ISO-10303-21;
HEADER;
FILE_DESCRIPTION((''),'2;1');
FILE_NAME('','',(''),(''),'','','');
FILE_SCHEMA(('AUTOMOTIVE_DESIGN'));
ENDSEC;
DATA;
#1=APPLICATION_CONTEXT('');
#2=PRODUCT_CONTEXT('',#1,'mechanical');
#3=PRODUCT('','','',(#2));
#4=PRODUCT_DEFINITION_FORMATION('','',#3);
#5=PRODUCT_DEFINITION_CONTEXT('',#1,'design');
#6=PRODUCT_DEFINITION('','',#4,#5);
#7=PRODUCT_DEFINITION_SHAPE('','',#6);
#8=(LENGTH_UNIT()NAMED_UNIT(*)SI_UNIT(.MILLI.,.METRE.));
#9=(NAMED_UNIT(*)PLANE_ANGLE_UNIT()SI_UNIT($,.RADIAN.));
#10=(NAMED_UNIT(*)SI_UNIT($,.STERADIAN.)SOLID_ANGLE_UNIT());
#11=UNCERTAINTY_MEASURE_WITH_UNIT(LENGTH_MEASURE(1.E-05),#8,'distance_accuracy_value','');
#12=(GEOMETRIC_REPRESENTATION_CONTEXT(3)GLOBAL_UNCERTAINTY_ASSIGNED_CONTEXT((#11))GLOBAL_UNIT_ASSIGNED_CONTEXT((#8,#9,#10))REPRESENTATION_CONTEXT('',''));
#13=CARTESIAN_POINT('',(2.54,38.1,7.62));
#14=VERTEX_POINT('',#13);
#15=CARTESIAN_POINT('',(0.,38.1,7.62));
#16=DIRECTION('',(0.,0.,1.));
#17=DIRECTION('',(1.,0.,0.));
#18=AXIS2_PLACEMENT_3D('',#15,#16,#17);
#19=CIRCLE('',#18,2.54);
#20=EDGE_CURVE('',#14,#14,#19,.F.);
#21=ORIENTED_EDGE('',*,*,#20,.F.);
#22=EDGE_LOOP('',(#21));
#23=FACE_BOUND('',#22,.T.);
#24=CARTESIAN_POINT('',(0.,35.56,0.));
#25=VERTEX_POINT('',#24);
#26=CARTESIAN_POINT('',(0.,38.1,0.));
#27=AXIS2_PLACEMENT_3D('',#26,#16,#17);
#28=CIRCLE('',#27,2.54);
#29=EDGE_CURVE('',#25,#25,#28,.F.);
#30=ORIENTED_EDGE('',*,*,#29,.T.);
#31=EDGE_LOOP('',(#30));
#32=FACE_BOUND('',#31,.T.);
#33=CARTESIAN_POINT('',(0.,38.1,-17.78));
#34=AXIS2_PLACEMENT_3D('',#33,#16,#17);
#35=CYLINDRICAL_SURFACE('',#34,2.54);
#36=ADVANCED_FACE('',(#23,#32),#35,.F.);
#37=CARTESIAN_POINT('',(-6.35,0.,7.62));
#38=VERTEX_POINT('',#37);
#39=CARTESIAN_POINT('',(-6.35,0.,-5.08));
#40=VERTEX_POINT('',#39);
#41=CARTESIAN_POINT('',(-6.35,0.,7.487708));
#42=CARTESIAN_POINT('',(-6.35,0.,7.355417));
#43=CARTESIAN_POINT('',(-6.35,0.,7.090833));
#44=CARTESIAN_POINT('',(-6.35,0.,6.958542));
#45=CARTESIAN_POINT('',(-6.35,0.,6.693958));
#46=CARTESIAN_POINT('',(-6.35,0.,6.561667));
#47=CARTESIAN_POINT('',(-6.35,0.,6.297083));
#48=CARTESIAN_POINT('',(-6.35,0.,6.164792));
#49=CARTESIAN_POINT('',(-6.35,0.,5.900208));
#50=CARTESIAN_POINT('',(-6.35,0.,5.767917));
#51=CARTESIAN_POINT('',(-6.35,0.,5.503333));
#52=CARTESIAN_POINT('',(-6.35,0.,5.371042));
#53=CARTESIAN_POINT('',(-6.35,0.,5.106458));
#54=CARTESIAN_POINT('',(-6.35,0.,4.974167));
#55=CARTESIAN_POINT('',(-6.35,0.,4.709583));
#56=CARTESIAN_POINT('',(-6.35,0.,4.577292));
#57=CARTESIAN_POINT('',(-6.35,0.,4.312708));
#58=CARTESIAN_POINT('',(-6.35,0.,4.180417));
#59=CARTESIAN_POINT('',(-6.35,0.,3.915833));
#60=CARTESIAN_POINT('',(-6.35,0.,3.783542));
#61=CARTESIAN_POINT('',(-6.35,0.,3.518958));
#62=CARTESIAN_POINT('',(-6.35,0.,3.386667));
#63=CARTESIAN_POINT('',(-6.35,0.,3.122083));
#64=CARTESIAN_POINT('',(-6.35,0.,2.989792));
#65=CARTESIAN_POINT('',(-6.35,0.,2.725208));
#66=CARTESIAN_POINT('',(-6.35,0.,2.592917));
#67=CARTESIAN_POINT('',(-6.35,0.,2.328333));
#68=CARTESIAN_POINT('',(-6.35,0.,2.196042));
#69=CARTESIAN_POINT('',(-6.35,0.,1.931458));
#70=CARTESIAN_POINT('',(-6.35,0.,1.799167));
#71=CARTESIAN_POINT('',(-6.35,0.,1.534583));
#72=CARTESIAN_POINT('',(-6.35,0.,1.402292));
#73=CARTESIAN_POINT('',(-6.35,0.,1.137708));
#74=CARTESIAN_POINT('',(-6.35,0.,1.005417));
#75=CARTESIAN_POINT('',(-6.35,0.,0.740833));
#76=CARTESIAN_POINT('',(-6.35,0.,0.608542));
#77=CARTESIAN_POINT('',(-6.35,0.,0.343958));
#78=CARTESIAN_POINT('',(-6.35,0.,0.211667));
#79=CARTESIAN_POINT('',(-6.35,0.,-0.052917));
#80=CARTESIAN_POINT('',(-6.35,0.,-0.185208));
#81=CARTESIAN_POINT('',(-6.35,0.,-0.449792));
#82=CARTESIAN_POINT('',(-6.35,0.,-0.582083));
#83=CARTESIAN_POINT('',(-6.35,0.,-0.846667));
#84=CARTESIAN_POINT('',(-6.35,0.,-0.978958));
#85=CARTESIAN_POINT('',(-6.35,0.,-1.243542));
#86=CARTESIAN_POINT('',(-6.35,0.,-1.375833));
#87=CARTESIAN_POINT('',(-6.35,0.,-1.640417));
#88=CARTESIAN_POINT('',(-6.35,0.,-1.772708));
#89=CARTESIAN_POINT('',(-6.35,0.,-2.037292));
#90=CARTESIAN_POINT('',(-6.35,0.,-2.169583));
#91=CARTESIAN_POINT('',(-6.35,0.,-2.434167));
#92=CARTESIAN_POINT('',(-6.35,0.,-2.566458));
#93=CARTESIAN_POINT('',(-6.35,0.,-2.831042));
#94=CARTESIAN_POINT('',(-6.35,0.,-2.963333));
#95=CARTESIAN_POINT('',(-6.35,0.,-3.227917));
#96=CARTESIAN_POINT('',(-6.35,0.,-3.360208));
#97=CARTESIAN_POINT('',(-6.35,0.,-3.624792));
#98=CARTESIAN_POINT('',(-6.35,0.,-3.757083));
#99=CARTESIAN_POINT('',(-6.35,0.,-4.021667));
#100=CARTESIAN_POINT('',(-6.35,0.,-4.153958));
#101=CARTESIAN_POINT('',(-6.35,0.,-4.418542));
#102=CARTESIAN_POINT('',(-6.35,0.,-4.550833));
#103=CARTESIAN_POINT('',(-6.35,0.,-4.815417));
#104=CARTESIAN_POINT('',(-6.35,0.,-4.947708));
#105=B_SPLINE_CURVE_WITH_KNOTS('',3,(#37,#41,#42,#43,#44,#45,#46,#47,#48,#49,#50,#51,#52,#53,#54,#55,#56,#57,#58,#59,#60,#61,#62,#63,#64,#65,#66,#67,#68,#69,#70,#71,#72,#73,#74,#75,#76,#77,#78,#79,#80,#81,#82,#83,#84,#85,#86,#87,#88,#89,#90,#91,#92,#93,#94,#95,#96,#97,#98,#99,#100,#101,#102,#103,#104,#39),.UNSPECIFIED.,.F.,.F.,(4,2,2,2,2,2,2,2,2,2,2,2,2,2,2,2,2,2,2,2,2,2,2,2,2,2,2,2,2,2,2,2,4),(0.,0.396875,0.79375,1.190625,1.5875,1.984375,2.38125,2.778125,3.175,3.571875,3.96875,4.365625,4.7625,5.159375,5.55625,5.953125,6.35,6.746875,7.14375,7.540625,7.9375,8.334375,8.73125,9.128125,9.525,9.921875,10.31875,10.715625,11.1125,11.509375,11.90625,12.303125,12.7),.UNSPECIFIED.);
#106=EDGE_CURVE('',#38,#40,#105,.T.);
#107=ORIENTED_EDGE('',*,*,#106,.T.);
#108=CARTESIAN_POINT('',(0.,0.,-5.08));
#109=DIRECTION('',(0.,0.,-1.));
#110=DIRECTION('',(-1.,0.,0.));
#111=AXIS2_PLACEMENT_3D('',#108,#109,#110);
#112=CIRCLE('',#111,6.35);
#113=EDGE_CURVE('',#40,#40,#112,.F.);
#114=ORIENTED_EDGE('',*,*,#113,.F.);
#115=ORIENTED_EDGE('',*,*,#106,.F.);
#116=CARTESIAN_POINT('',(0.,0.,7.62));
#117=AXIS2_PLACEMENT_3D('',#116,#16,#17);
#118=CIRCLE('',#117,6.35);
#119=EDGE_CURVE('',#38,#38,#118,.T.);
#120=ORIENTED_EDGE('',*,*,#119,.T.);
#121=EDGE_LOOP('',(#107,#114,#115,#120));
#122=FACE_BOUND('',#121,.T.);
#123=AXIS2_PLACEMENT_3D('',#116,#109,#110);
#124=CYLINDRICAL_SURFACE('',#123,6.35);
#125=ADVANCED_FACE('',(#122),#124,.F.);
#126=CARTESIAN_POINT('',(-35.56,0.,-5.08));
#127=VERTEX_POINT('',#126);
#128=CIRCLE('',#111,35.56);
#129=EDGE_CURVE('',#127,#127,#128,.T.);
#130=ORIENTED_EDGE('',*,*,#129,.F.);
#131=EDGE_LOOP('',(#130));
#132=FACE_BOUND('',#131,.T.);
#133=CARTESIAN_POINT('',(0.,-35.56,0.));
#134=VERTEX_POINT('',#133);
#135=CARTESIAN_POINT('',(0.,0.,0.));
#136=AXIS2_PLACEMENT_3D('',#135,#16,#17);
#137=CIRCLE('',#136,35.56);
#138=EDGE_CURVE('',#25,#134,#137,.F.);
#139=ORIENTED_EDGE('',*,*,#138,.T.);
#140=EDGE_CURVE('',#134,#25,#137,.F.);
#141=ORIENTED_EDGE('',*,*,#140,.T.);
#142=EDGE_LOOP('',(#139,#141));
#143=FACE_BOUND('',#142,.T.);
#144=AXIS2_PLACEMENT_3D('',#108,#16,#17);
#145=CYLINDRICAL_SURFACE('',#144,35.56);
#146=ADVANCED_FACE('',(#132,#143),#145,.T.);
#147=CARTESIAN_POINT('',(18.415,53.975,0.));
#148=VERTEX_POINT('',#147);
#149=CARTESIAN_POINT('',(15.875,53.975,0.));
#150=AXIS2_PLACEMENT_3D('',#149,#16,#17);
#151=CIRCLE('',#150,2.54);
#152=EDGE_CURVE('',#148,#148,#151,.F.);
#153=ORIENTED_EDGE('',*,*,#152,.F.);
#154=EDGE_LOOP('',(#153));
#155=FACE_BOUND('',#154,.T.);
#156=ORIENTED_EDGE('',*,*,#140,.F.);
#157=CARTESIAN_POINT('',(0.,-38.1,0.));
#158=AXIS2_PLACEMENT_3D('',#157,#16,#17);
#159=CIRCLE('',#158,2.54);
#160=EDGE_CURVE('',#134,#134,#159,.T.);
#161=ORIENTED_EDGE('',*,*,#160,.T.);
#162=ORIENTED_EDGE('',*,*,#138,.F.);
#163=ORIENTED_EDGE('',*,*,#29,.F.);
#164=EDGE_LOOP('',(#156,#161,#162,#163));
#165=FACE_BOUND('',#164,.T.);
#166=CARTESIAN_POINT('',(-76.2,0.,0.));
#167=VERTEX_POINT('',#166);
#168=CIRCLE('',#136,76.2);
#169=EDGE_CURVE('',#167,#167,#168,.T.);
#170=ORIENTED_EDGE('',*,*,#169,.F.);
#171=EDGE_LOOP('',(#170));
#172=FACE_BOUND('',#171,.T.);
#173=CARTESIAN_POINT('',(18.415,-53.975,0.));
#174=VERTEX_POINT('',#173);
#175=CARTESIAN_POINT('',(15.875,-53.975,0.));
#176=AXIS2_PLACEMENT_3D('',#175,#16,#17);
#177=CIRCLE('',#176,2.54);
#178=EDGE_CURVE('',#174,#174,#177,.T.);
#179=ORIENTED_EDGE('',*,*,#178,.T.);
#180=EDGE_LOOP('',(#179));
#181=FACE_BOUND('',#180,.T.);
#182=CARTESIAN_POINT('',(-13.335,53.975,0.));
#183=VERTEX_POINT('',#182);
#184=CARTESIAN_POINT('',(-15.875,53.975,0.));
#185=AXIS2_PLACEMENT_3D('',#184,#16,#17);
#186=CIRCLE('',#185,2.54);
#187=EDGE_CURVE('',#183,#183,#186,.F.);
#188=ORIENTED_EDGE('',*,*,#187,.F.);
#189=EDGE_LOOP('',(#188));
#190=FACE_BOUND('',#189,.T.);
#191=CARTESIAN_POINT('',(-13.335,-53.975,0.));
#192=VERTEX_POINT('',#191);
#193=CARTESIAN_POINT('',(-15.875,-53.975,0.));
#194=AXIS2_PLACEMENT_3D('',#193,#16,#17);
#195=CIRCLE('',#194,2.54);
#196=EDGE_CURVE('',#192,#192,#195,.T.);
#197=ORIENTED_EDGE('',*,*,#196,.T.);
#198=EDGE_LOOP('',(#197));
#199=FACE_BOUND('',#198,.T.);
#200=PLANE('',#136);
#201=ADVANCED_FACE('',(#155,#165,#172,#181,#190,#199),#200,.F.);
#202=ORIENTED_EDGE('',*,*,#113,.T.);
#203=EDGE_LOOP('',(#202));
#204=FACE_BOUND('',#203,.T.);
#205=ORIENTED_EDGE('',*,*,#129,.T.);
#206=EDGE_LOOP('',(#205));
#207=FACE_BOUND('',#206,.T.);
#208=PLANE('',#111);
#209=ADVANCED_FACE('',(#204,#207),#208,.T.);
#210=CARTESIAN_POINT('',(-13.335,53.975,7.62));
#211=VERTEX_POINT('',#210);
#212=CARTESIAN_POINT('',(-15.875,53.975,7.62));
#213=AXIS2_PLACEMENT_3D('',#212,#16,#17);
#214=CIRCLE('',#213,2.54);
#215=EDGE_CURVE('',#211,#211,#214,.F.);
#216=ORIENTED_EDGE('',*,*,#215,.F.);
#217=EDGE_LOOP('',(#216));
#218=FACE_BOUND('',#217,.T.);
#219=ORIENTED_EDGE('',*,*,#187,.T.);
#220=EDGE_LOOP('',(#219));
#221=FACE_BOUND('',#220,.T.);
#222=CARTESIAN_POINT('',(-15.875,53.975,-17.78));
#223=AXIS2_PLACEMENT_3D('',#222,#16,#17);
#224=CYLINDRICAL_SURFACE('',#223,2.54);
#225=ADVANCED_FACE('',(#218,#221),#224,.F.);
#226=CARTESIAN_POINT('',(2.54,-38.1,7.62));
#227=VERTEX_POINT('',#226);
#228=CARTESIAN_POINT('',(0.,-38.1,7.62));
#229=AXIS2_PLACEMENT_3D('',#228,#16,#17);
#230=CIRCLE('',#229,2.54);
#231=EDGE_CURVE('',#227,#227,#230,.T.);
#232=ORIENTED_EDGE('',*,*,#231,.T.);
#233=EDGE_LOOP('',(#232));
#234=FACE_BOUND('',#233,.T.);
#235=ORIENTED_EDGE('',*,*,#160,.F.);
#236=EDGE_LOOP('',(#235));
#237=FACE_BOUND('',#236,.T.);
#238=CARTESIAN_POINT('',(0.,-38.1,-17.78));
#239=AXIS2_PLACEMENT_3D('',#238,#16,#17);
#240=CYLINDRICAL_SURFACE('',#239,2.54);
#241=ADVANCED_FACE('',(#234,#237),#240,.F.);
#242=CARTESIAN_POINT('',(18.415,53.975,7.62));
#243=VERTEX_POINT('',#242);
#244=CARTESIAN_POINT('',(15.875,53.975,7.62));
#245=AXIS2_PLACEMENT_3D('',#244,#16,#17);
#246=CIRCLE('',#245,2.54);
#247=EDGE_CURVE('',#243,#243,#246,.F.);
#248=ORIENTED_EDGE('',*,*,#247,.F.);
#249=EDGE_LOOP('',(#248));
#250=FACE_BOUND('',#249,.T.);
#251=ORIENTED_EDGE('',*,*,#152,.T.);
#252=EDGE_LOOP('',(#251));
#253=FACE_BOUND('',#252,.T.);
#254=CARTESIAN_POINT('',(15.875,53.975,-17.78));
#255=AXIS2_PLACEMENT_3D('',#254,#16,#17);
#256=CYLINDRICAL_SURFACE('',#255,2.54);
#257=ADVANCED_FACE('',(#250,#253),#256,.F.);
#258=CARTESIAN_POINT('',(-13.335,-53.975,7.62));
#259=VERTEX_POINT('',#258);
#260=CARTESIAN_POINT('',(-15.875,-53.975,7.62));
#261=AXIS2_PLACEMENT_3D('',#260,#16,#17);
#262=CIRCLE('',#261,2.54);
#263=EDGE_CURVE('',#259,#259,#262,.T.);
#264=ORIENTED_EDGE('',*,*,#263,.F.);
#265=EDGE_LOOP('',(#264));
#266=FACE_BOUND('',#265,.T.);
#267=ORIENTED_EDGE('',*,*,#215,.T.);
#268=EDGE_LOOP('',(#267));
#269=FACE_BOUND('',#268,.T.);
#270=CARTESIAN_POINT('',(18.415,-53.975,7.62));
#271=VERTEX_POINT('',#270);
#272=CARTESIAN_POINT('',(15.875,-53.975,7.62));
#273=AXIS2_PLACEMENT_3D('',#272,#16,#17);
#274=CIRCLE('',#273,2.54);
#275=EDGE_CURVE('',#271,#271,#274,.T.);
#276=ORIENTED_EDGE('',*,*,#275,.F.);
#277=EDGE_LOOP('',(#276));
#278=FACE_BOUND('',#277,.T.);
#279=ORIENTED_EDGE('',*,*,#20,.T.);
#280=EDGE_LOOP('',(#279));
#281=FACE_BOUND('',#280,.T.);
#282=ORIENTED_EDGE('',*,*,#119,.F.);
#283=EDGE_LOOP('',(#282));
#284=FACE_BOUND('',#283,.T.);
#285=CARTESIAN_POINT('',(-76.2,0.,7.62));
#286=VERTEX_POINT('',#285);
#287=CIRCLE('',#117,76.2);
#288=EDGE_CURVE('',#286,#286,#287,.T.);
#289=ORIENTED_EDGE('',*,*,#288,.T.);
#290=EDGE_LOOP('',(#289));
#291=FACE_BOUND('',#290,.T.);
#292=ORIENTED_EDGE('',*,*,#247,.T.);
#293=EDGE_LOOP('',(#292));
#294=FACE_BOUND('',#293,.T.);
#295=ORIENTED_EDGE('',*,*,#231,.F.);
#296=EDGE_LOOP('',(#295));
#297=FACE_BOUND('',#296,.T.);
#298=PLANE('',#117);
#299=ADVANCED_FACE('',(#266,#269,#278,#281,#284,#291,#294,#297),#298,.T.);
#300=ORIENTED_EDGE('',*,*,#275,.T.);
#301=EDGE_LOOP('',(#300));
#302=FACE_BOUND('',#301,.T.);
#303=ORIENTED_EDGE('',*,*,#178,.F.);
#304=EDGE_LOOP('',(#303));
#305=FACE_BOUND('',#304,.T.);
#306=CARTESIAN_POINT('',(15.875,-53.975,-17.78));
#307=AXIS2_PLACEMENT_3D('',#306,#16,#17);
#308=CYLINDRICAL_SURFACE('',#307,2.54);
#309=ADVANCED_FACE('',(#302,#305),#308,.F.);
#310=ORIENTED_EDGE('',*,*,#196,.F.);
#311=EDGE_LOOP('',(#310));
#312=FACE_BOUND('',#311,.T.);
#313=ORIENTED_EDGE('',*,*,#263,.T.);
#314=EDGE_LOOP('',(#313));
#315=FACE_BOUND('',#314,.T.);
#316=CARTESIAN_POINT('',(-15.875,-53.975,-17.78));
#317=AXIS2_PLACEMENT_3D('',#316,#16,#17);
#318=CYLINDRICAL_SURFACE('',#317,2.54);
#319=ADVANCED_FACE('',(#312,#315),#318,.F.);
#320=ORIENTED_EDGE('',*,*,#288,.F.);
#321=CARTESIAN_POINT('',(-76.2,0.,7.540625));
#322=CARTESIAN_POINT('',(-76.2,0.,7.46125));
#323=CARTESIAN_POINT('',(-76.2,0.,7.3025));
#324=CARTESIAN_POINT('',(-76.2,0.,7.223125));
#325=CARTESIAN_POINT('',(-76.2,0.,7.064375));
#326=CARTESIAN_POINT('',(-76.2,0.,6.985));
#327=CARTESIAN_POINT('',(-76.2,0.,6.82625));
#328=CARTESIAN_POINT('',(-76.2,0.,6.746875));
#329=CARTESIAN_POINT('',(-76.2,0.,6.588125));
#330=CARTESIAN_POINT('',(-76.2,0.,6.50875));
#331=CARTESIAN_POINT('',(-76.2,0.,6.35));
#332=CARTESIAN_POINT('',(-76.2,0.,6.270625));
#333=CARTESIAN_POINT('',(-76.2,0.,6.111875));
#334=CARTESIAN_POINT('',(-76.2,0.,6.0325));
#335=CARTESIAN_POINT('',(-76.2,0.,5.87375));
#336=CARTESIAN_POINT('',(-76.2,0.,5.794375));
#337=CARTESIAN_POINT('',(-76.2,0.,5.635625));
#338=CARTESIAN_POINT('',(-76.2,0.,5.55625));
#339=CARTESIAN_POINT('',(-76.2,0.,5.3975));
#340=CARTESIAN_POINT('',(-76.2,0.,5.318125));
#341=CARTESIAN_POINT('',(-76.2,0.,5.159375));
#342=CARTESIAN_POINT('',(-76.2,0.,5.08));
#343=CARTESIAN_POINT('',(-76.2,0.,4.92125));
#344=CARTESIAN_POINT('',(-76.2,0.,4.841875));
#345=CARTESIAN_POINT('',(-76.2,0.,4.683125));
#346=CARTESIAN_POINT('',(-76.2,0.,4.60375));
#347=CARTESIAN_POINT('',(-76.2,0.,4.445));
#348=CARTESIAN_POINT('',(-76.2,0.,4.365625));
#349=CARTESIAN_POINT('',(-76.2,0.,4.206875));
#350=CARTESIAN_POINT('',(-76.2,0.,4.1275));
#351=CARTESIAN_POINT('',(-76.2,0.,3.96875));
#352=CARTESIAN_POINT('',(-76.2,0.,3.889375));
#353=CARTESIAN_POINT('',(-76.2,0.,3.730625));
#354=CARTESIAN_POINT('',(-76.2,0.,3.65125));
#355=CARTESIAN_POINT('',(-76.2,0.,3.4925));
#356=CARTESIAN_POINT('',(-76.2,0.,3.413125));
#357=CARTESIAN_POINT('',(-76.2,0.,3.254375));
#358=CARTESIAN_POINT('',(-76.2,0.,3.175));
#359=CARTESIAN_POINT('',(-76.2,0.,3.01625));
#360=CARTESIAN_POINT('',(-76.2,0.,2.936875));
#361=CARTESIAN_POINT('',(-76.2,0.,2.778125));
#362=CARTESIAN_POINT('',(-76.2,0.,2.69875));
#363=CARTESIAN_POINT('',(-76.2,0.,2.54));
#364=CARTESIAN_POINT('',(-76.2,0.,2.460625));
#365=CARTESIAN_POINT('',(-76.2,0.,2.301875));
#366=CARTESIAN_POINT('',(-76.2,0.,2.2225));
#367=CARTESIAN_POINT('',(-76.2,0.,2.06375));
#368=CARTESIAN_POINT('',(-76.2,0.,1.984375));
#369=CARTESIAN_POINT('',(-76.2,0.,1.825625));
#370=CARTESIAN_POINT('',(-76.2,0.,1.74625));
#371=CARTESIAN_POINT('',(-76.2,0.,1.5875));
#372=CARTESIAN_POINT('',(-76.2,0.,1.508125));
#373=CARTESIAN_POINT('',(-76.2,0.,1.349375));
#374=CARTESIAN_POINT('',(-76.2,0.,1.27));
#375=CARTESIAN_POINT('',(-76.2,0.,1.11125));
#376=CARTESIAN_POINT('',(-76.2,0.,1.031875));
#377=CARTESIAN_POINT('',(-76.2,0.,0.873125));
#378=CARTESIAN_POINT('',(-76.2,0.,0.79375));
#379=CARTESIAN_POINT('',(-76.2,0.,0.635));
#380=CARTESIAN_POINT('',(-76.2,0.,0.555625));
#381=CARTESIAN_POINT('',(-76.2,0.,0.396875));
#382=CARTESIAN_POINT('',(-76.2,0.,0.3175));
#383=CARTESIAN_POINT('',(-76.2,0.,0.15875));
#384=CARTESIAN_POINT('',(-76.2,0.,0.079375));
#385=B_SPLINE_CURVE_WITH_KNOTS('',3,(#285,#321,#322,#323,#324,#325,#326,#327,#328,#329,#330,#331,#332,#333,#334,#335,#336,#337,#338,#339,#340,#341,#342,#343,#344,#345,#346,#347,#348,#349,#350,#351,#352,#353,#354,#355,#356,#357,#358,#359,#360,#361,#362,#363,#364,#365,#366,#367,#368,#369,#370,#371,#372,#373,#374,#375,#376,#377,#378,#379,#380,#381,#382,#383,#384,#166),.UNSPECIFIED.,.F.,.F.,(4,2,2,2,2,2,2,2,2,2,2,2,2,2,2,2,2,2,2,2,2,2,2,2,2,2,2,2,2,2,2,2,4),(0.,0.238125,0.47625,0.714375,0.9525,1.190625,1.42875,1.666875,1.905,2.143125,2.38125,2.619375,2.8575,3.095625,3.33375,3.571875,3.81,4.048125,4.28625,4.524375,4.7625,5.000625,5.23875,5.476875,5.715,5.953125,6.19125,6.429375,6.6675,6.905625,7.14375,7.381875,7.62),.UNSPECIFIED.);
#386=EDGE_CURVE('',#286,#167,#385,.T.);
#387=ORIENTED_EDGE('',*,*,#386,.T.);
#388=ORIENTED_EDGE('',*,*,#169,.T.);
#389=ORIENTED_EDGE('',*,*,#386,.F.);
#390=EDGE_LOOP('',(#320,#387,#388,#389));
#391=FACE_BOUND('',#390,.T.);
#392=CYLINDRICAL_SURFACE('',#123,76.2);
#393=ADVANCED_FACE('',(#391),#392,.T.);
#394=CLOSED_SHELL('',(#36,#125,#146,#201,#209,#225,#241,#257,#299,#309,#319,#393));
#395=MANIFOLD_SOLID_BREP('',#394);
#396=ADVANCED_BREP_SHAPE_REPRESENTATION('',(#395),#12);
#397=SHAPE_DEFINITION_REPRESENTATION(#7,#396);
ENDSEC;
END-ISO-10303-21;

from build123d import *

# Parameters (mm, degrees)
SKETCH1_R           = 76.2
SKETCH1_R_2         = 6.35
BOSS_EXTRUDE1_DEPTH = 7.62
SKETCH2_R           = 35.56
BOSS_EXTRUDE2_DEPTH = 5.08
CUT_EXTRUDE2_START  = -25.4
SKETCH3_R           = 2.54
SKETCH3_R_2         = 6.35
CUT_EXTRUDE2_DEPTH  = 25.4


with BuildPart() as part:
    # Sketch1 → Boss-Extrude1 (new body)
    with BuildSketch(Plane.XY):
        Circle(SKETCH1_R)
        Circle(SKETCH1_R_2, mode=Mode.SUBTRACT)
    extrude(amount=BOSS_EXTRUDE1_DEPTH)

    # Sketch2 → Boss-Extrude2 (add)
    with BuildSketch(Plane(origin=(0, 0, 0), x_dir=(-1, 0, 0), z_dir=(0, 0, -1))):
        Circle(SKETCH2_R)
    extrude(amount=BOSS_EXTRUDE2_DEPTH)

    # Sketch3 → Cut-Extrude2 (cut)
    with BuildSketch(Plane.XY.offset(7.62).offset(CUT_EXTRUDE2_START)):
        with Locations((15.875, -53.975)):
            Circle(SKETCH3_R)
        with Locations((-15.875, -53.975)):
            Circle(SKETCH3_R)
        with Locations((0, -38.1)):
            Circle(SKETCH3_R)
        with Locations((-15.875, 53.975)):
            Circle(SKETCH3_R)
        with Locations((0, 38.1)):
            Circle(SKETCH3_R)
        with Locations((15.875, 53.975)):
            Circle(SKETCH3_R)
        Circle(SKETCH3_R_2)
    extrude(amount=CUT_EXTRUDE2_DEPTH, mode=Mode.SUBTRACT)


solid = part.part
